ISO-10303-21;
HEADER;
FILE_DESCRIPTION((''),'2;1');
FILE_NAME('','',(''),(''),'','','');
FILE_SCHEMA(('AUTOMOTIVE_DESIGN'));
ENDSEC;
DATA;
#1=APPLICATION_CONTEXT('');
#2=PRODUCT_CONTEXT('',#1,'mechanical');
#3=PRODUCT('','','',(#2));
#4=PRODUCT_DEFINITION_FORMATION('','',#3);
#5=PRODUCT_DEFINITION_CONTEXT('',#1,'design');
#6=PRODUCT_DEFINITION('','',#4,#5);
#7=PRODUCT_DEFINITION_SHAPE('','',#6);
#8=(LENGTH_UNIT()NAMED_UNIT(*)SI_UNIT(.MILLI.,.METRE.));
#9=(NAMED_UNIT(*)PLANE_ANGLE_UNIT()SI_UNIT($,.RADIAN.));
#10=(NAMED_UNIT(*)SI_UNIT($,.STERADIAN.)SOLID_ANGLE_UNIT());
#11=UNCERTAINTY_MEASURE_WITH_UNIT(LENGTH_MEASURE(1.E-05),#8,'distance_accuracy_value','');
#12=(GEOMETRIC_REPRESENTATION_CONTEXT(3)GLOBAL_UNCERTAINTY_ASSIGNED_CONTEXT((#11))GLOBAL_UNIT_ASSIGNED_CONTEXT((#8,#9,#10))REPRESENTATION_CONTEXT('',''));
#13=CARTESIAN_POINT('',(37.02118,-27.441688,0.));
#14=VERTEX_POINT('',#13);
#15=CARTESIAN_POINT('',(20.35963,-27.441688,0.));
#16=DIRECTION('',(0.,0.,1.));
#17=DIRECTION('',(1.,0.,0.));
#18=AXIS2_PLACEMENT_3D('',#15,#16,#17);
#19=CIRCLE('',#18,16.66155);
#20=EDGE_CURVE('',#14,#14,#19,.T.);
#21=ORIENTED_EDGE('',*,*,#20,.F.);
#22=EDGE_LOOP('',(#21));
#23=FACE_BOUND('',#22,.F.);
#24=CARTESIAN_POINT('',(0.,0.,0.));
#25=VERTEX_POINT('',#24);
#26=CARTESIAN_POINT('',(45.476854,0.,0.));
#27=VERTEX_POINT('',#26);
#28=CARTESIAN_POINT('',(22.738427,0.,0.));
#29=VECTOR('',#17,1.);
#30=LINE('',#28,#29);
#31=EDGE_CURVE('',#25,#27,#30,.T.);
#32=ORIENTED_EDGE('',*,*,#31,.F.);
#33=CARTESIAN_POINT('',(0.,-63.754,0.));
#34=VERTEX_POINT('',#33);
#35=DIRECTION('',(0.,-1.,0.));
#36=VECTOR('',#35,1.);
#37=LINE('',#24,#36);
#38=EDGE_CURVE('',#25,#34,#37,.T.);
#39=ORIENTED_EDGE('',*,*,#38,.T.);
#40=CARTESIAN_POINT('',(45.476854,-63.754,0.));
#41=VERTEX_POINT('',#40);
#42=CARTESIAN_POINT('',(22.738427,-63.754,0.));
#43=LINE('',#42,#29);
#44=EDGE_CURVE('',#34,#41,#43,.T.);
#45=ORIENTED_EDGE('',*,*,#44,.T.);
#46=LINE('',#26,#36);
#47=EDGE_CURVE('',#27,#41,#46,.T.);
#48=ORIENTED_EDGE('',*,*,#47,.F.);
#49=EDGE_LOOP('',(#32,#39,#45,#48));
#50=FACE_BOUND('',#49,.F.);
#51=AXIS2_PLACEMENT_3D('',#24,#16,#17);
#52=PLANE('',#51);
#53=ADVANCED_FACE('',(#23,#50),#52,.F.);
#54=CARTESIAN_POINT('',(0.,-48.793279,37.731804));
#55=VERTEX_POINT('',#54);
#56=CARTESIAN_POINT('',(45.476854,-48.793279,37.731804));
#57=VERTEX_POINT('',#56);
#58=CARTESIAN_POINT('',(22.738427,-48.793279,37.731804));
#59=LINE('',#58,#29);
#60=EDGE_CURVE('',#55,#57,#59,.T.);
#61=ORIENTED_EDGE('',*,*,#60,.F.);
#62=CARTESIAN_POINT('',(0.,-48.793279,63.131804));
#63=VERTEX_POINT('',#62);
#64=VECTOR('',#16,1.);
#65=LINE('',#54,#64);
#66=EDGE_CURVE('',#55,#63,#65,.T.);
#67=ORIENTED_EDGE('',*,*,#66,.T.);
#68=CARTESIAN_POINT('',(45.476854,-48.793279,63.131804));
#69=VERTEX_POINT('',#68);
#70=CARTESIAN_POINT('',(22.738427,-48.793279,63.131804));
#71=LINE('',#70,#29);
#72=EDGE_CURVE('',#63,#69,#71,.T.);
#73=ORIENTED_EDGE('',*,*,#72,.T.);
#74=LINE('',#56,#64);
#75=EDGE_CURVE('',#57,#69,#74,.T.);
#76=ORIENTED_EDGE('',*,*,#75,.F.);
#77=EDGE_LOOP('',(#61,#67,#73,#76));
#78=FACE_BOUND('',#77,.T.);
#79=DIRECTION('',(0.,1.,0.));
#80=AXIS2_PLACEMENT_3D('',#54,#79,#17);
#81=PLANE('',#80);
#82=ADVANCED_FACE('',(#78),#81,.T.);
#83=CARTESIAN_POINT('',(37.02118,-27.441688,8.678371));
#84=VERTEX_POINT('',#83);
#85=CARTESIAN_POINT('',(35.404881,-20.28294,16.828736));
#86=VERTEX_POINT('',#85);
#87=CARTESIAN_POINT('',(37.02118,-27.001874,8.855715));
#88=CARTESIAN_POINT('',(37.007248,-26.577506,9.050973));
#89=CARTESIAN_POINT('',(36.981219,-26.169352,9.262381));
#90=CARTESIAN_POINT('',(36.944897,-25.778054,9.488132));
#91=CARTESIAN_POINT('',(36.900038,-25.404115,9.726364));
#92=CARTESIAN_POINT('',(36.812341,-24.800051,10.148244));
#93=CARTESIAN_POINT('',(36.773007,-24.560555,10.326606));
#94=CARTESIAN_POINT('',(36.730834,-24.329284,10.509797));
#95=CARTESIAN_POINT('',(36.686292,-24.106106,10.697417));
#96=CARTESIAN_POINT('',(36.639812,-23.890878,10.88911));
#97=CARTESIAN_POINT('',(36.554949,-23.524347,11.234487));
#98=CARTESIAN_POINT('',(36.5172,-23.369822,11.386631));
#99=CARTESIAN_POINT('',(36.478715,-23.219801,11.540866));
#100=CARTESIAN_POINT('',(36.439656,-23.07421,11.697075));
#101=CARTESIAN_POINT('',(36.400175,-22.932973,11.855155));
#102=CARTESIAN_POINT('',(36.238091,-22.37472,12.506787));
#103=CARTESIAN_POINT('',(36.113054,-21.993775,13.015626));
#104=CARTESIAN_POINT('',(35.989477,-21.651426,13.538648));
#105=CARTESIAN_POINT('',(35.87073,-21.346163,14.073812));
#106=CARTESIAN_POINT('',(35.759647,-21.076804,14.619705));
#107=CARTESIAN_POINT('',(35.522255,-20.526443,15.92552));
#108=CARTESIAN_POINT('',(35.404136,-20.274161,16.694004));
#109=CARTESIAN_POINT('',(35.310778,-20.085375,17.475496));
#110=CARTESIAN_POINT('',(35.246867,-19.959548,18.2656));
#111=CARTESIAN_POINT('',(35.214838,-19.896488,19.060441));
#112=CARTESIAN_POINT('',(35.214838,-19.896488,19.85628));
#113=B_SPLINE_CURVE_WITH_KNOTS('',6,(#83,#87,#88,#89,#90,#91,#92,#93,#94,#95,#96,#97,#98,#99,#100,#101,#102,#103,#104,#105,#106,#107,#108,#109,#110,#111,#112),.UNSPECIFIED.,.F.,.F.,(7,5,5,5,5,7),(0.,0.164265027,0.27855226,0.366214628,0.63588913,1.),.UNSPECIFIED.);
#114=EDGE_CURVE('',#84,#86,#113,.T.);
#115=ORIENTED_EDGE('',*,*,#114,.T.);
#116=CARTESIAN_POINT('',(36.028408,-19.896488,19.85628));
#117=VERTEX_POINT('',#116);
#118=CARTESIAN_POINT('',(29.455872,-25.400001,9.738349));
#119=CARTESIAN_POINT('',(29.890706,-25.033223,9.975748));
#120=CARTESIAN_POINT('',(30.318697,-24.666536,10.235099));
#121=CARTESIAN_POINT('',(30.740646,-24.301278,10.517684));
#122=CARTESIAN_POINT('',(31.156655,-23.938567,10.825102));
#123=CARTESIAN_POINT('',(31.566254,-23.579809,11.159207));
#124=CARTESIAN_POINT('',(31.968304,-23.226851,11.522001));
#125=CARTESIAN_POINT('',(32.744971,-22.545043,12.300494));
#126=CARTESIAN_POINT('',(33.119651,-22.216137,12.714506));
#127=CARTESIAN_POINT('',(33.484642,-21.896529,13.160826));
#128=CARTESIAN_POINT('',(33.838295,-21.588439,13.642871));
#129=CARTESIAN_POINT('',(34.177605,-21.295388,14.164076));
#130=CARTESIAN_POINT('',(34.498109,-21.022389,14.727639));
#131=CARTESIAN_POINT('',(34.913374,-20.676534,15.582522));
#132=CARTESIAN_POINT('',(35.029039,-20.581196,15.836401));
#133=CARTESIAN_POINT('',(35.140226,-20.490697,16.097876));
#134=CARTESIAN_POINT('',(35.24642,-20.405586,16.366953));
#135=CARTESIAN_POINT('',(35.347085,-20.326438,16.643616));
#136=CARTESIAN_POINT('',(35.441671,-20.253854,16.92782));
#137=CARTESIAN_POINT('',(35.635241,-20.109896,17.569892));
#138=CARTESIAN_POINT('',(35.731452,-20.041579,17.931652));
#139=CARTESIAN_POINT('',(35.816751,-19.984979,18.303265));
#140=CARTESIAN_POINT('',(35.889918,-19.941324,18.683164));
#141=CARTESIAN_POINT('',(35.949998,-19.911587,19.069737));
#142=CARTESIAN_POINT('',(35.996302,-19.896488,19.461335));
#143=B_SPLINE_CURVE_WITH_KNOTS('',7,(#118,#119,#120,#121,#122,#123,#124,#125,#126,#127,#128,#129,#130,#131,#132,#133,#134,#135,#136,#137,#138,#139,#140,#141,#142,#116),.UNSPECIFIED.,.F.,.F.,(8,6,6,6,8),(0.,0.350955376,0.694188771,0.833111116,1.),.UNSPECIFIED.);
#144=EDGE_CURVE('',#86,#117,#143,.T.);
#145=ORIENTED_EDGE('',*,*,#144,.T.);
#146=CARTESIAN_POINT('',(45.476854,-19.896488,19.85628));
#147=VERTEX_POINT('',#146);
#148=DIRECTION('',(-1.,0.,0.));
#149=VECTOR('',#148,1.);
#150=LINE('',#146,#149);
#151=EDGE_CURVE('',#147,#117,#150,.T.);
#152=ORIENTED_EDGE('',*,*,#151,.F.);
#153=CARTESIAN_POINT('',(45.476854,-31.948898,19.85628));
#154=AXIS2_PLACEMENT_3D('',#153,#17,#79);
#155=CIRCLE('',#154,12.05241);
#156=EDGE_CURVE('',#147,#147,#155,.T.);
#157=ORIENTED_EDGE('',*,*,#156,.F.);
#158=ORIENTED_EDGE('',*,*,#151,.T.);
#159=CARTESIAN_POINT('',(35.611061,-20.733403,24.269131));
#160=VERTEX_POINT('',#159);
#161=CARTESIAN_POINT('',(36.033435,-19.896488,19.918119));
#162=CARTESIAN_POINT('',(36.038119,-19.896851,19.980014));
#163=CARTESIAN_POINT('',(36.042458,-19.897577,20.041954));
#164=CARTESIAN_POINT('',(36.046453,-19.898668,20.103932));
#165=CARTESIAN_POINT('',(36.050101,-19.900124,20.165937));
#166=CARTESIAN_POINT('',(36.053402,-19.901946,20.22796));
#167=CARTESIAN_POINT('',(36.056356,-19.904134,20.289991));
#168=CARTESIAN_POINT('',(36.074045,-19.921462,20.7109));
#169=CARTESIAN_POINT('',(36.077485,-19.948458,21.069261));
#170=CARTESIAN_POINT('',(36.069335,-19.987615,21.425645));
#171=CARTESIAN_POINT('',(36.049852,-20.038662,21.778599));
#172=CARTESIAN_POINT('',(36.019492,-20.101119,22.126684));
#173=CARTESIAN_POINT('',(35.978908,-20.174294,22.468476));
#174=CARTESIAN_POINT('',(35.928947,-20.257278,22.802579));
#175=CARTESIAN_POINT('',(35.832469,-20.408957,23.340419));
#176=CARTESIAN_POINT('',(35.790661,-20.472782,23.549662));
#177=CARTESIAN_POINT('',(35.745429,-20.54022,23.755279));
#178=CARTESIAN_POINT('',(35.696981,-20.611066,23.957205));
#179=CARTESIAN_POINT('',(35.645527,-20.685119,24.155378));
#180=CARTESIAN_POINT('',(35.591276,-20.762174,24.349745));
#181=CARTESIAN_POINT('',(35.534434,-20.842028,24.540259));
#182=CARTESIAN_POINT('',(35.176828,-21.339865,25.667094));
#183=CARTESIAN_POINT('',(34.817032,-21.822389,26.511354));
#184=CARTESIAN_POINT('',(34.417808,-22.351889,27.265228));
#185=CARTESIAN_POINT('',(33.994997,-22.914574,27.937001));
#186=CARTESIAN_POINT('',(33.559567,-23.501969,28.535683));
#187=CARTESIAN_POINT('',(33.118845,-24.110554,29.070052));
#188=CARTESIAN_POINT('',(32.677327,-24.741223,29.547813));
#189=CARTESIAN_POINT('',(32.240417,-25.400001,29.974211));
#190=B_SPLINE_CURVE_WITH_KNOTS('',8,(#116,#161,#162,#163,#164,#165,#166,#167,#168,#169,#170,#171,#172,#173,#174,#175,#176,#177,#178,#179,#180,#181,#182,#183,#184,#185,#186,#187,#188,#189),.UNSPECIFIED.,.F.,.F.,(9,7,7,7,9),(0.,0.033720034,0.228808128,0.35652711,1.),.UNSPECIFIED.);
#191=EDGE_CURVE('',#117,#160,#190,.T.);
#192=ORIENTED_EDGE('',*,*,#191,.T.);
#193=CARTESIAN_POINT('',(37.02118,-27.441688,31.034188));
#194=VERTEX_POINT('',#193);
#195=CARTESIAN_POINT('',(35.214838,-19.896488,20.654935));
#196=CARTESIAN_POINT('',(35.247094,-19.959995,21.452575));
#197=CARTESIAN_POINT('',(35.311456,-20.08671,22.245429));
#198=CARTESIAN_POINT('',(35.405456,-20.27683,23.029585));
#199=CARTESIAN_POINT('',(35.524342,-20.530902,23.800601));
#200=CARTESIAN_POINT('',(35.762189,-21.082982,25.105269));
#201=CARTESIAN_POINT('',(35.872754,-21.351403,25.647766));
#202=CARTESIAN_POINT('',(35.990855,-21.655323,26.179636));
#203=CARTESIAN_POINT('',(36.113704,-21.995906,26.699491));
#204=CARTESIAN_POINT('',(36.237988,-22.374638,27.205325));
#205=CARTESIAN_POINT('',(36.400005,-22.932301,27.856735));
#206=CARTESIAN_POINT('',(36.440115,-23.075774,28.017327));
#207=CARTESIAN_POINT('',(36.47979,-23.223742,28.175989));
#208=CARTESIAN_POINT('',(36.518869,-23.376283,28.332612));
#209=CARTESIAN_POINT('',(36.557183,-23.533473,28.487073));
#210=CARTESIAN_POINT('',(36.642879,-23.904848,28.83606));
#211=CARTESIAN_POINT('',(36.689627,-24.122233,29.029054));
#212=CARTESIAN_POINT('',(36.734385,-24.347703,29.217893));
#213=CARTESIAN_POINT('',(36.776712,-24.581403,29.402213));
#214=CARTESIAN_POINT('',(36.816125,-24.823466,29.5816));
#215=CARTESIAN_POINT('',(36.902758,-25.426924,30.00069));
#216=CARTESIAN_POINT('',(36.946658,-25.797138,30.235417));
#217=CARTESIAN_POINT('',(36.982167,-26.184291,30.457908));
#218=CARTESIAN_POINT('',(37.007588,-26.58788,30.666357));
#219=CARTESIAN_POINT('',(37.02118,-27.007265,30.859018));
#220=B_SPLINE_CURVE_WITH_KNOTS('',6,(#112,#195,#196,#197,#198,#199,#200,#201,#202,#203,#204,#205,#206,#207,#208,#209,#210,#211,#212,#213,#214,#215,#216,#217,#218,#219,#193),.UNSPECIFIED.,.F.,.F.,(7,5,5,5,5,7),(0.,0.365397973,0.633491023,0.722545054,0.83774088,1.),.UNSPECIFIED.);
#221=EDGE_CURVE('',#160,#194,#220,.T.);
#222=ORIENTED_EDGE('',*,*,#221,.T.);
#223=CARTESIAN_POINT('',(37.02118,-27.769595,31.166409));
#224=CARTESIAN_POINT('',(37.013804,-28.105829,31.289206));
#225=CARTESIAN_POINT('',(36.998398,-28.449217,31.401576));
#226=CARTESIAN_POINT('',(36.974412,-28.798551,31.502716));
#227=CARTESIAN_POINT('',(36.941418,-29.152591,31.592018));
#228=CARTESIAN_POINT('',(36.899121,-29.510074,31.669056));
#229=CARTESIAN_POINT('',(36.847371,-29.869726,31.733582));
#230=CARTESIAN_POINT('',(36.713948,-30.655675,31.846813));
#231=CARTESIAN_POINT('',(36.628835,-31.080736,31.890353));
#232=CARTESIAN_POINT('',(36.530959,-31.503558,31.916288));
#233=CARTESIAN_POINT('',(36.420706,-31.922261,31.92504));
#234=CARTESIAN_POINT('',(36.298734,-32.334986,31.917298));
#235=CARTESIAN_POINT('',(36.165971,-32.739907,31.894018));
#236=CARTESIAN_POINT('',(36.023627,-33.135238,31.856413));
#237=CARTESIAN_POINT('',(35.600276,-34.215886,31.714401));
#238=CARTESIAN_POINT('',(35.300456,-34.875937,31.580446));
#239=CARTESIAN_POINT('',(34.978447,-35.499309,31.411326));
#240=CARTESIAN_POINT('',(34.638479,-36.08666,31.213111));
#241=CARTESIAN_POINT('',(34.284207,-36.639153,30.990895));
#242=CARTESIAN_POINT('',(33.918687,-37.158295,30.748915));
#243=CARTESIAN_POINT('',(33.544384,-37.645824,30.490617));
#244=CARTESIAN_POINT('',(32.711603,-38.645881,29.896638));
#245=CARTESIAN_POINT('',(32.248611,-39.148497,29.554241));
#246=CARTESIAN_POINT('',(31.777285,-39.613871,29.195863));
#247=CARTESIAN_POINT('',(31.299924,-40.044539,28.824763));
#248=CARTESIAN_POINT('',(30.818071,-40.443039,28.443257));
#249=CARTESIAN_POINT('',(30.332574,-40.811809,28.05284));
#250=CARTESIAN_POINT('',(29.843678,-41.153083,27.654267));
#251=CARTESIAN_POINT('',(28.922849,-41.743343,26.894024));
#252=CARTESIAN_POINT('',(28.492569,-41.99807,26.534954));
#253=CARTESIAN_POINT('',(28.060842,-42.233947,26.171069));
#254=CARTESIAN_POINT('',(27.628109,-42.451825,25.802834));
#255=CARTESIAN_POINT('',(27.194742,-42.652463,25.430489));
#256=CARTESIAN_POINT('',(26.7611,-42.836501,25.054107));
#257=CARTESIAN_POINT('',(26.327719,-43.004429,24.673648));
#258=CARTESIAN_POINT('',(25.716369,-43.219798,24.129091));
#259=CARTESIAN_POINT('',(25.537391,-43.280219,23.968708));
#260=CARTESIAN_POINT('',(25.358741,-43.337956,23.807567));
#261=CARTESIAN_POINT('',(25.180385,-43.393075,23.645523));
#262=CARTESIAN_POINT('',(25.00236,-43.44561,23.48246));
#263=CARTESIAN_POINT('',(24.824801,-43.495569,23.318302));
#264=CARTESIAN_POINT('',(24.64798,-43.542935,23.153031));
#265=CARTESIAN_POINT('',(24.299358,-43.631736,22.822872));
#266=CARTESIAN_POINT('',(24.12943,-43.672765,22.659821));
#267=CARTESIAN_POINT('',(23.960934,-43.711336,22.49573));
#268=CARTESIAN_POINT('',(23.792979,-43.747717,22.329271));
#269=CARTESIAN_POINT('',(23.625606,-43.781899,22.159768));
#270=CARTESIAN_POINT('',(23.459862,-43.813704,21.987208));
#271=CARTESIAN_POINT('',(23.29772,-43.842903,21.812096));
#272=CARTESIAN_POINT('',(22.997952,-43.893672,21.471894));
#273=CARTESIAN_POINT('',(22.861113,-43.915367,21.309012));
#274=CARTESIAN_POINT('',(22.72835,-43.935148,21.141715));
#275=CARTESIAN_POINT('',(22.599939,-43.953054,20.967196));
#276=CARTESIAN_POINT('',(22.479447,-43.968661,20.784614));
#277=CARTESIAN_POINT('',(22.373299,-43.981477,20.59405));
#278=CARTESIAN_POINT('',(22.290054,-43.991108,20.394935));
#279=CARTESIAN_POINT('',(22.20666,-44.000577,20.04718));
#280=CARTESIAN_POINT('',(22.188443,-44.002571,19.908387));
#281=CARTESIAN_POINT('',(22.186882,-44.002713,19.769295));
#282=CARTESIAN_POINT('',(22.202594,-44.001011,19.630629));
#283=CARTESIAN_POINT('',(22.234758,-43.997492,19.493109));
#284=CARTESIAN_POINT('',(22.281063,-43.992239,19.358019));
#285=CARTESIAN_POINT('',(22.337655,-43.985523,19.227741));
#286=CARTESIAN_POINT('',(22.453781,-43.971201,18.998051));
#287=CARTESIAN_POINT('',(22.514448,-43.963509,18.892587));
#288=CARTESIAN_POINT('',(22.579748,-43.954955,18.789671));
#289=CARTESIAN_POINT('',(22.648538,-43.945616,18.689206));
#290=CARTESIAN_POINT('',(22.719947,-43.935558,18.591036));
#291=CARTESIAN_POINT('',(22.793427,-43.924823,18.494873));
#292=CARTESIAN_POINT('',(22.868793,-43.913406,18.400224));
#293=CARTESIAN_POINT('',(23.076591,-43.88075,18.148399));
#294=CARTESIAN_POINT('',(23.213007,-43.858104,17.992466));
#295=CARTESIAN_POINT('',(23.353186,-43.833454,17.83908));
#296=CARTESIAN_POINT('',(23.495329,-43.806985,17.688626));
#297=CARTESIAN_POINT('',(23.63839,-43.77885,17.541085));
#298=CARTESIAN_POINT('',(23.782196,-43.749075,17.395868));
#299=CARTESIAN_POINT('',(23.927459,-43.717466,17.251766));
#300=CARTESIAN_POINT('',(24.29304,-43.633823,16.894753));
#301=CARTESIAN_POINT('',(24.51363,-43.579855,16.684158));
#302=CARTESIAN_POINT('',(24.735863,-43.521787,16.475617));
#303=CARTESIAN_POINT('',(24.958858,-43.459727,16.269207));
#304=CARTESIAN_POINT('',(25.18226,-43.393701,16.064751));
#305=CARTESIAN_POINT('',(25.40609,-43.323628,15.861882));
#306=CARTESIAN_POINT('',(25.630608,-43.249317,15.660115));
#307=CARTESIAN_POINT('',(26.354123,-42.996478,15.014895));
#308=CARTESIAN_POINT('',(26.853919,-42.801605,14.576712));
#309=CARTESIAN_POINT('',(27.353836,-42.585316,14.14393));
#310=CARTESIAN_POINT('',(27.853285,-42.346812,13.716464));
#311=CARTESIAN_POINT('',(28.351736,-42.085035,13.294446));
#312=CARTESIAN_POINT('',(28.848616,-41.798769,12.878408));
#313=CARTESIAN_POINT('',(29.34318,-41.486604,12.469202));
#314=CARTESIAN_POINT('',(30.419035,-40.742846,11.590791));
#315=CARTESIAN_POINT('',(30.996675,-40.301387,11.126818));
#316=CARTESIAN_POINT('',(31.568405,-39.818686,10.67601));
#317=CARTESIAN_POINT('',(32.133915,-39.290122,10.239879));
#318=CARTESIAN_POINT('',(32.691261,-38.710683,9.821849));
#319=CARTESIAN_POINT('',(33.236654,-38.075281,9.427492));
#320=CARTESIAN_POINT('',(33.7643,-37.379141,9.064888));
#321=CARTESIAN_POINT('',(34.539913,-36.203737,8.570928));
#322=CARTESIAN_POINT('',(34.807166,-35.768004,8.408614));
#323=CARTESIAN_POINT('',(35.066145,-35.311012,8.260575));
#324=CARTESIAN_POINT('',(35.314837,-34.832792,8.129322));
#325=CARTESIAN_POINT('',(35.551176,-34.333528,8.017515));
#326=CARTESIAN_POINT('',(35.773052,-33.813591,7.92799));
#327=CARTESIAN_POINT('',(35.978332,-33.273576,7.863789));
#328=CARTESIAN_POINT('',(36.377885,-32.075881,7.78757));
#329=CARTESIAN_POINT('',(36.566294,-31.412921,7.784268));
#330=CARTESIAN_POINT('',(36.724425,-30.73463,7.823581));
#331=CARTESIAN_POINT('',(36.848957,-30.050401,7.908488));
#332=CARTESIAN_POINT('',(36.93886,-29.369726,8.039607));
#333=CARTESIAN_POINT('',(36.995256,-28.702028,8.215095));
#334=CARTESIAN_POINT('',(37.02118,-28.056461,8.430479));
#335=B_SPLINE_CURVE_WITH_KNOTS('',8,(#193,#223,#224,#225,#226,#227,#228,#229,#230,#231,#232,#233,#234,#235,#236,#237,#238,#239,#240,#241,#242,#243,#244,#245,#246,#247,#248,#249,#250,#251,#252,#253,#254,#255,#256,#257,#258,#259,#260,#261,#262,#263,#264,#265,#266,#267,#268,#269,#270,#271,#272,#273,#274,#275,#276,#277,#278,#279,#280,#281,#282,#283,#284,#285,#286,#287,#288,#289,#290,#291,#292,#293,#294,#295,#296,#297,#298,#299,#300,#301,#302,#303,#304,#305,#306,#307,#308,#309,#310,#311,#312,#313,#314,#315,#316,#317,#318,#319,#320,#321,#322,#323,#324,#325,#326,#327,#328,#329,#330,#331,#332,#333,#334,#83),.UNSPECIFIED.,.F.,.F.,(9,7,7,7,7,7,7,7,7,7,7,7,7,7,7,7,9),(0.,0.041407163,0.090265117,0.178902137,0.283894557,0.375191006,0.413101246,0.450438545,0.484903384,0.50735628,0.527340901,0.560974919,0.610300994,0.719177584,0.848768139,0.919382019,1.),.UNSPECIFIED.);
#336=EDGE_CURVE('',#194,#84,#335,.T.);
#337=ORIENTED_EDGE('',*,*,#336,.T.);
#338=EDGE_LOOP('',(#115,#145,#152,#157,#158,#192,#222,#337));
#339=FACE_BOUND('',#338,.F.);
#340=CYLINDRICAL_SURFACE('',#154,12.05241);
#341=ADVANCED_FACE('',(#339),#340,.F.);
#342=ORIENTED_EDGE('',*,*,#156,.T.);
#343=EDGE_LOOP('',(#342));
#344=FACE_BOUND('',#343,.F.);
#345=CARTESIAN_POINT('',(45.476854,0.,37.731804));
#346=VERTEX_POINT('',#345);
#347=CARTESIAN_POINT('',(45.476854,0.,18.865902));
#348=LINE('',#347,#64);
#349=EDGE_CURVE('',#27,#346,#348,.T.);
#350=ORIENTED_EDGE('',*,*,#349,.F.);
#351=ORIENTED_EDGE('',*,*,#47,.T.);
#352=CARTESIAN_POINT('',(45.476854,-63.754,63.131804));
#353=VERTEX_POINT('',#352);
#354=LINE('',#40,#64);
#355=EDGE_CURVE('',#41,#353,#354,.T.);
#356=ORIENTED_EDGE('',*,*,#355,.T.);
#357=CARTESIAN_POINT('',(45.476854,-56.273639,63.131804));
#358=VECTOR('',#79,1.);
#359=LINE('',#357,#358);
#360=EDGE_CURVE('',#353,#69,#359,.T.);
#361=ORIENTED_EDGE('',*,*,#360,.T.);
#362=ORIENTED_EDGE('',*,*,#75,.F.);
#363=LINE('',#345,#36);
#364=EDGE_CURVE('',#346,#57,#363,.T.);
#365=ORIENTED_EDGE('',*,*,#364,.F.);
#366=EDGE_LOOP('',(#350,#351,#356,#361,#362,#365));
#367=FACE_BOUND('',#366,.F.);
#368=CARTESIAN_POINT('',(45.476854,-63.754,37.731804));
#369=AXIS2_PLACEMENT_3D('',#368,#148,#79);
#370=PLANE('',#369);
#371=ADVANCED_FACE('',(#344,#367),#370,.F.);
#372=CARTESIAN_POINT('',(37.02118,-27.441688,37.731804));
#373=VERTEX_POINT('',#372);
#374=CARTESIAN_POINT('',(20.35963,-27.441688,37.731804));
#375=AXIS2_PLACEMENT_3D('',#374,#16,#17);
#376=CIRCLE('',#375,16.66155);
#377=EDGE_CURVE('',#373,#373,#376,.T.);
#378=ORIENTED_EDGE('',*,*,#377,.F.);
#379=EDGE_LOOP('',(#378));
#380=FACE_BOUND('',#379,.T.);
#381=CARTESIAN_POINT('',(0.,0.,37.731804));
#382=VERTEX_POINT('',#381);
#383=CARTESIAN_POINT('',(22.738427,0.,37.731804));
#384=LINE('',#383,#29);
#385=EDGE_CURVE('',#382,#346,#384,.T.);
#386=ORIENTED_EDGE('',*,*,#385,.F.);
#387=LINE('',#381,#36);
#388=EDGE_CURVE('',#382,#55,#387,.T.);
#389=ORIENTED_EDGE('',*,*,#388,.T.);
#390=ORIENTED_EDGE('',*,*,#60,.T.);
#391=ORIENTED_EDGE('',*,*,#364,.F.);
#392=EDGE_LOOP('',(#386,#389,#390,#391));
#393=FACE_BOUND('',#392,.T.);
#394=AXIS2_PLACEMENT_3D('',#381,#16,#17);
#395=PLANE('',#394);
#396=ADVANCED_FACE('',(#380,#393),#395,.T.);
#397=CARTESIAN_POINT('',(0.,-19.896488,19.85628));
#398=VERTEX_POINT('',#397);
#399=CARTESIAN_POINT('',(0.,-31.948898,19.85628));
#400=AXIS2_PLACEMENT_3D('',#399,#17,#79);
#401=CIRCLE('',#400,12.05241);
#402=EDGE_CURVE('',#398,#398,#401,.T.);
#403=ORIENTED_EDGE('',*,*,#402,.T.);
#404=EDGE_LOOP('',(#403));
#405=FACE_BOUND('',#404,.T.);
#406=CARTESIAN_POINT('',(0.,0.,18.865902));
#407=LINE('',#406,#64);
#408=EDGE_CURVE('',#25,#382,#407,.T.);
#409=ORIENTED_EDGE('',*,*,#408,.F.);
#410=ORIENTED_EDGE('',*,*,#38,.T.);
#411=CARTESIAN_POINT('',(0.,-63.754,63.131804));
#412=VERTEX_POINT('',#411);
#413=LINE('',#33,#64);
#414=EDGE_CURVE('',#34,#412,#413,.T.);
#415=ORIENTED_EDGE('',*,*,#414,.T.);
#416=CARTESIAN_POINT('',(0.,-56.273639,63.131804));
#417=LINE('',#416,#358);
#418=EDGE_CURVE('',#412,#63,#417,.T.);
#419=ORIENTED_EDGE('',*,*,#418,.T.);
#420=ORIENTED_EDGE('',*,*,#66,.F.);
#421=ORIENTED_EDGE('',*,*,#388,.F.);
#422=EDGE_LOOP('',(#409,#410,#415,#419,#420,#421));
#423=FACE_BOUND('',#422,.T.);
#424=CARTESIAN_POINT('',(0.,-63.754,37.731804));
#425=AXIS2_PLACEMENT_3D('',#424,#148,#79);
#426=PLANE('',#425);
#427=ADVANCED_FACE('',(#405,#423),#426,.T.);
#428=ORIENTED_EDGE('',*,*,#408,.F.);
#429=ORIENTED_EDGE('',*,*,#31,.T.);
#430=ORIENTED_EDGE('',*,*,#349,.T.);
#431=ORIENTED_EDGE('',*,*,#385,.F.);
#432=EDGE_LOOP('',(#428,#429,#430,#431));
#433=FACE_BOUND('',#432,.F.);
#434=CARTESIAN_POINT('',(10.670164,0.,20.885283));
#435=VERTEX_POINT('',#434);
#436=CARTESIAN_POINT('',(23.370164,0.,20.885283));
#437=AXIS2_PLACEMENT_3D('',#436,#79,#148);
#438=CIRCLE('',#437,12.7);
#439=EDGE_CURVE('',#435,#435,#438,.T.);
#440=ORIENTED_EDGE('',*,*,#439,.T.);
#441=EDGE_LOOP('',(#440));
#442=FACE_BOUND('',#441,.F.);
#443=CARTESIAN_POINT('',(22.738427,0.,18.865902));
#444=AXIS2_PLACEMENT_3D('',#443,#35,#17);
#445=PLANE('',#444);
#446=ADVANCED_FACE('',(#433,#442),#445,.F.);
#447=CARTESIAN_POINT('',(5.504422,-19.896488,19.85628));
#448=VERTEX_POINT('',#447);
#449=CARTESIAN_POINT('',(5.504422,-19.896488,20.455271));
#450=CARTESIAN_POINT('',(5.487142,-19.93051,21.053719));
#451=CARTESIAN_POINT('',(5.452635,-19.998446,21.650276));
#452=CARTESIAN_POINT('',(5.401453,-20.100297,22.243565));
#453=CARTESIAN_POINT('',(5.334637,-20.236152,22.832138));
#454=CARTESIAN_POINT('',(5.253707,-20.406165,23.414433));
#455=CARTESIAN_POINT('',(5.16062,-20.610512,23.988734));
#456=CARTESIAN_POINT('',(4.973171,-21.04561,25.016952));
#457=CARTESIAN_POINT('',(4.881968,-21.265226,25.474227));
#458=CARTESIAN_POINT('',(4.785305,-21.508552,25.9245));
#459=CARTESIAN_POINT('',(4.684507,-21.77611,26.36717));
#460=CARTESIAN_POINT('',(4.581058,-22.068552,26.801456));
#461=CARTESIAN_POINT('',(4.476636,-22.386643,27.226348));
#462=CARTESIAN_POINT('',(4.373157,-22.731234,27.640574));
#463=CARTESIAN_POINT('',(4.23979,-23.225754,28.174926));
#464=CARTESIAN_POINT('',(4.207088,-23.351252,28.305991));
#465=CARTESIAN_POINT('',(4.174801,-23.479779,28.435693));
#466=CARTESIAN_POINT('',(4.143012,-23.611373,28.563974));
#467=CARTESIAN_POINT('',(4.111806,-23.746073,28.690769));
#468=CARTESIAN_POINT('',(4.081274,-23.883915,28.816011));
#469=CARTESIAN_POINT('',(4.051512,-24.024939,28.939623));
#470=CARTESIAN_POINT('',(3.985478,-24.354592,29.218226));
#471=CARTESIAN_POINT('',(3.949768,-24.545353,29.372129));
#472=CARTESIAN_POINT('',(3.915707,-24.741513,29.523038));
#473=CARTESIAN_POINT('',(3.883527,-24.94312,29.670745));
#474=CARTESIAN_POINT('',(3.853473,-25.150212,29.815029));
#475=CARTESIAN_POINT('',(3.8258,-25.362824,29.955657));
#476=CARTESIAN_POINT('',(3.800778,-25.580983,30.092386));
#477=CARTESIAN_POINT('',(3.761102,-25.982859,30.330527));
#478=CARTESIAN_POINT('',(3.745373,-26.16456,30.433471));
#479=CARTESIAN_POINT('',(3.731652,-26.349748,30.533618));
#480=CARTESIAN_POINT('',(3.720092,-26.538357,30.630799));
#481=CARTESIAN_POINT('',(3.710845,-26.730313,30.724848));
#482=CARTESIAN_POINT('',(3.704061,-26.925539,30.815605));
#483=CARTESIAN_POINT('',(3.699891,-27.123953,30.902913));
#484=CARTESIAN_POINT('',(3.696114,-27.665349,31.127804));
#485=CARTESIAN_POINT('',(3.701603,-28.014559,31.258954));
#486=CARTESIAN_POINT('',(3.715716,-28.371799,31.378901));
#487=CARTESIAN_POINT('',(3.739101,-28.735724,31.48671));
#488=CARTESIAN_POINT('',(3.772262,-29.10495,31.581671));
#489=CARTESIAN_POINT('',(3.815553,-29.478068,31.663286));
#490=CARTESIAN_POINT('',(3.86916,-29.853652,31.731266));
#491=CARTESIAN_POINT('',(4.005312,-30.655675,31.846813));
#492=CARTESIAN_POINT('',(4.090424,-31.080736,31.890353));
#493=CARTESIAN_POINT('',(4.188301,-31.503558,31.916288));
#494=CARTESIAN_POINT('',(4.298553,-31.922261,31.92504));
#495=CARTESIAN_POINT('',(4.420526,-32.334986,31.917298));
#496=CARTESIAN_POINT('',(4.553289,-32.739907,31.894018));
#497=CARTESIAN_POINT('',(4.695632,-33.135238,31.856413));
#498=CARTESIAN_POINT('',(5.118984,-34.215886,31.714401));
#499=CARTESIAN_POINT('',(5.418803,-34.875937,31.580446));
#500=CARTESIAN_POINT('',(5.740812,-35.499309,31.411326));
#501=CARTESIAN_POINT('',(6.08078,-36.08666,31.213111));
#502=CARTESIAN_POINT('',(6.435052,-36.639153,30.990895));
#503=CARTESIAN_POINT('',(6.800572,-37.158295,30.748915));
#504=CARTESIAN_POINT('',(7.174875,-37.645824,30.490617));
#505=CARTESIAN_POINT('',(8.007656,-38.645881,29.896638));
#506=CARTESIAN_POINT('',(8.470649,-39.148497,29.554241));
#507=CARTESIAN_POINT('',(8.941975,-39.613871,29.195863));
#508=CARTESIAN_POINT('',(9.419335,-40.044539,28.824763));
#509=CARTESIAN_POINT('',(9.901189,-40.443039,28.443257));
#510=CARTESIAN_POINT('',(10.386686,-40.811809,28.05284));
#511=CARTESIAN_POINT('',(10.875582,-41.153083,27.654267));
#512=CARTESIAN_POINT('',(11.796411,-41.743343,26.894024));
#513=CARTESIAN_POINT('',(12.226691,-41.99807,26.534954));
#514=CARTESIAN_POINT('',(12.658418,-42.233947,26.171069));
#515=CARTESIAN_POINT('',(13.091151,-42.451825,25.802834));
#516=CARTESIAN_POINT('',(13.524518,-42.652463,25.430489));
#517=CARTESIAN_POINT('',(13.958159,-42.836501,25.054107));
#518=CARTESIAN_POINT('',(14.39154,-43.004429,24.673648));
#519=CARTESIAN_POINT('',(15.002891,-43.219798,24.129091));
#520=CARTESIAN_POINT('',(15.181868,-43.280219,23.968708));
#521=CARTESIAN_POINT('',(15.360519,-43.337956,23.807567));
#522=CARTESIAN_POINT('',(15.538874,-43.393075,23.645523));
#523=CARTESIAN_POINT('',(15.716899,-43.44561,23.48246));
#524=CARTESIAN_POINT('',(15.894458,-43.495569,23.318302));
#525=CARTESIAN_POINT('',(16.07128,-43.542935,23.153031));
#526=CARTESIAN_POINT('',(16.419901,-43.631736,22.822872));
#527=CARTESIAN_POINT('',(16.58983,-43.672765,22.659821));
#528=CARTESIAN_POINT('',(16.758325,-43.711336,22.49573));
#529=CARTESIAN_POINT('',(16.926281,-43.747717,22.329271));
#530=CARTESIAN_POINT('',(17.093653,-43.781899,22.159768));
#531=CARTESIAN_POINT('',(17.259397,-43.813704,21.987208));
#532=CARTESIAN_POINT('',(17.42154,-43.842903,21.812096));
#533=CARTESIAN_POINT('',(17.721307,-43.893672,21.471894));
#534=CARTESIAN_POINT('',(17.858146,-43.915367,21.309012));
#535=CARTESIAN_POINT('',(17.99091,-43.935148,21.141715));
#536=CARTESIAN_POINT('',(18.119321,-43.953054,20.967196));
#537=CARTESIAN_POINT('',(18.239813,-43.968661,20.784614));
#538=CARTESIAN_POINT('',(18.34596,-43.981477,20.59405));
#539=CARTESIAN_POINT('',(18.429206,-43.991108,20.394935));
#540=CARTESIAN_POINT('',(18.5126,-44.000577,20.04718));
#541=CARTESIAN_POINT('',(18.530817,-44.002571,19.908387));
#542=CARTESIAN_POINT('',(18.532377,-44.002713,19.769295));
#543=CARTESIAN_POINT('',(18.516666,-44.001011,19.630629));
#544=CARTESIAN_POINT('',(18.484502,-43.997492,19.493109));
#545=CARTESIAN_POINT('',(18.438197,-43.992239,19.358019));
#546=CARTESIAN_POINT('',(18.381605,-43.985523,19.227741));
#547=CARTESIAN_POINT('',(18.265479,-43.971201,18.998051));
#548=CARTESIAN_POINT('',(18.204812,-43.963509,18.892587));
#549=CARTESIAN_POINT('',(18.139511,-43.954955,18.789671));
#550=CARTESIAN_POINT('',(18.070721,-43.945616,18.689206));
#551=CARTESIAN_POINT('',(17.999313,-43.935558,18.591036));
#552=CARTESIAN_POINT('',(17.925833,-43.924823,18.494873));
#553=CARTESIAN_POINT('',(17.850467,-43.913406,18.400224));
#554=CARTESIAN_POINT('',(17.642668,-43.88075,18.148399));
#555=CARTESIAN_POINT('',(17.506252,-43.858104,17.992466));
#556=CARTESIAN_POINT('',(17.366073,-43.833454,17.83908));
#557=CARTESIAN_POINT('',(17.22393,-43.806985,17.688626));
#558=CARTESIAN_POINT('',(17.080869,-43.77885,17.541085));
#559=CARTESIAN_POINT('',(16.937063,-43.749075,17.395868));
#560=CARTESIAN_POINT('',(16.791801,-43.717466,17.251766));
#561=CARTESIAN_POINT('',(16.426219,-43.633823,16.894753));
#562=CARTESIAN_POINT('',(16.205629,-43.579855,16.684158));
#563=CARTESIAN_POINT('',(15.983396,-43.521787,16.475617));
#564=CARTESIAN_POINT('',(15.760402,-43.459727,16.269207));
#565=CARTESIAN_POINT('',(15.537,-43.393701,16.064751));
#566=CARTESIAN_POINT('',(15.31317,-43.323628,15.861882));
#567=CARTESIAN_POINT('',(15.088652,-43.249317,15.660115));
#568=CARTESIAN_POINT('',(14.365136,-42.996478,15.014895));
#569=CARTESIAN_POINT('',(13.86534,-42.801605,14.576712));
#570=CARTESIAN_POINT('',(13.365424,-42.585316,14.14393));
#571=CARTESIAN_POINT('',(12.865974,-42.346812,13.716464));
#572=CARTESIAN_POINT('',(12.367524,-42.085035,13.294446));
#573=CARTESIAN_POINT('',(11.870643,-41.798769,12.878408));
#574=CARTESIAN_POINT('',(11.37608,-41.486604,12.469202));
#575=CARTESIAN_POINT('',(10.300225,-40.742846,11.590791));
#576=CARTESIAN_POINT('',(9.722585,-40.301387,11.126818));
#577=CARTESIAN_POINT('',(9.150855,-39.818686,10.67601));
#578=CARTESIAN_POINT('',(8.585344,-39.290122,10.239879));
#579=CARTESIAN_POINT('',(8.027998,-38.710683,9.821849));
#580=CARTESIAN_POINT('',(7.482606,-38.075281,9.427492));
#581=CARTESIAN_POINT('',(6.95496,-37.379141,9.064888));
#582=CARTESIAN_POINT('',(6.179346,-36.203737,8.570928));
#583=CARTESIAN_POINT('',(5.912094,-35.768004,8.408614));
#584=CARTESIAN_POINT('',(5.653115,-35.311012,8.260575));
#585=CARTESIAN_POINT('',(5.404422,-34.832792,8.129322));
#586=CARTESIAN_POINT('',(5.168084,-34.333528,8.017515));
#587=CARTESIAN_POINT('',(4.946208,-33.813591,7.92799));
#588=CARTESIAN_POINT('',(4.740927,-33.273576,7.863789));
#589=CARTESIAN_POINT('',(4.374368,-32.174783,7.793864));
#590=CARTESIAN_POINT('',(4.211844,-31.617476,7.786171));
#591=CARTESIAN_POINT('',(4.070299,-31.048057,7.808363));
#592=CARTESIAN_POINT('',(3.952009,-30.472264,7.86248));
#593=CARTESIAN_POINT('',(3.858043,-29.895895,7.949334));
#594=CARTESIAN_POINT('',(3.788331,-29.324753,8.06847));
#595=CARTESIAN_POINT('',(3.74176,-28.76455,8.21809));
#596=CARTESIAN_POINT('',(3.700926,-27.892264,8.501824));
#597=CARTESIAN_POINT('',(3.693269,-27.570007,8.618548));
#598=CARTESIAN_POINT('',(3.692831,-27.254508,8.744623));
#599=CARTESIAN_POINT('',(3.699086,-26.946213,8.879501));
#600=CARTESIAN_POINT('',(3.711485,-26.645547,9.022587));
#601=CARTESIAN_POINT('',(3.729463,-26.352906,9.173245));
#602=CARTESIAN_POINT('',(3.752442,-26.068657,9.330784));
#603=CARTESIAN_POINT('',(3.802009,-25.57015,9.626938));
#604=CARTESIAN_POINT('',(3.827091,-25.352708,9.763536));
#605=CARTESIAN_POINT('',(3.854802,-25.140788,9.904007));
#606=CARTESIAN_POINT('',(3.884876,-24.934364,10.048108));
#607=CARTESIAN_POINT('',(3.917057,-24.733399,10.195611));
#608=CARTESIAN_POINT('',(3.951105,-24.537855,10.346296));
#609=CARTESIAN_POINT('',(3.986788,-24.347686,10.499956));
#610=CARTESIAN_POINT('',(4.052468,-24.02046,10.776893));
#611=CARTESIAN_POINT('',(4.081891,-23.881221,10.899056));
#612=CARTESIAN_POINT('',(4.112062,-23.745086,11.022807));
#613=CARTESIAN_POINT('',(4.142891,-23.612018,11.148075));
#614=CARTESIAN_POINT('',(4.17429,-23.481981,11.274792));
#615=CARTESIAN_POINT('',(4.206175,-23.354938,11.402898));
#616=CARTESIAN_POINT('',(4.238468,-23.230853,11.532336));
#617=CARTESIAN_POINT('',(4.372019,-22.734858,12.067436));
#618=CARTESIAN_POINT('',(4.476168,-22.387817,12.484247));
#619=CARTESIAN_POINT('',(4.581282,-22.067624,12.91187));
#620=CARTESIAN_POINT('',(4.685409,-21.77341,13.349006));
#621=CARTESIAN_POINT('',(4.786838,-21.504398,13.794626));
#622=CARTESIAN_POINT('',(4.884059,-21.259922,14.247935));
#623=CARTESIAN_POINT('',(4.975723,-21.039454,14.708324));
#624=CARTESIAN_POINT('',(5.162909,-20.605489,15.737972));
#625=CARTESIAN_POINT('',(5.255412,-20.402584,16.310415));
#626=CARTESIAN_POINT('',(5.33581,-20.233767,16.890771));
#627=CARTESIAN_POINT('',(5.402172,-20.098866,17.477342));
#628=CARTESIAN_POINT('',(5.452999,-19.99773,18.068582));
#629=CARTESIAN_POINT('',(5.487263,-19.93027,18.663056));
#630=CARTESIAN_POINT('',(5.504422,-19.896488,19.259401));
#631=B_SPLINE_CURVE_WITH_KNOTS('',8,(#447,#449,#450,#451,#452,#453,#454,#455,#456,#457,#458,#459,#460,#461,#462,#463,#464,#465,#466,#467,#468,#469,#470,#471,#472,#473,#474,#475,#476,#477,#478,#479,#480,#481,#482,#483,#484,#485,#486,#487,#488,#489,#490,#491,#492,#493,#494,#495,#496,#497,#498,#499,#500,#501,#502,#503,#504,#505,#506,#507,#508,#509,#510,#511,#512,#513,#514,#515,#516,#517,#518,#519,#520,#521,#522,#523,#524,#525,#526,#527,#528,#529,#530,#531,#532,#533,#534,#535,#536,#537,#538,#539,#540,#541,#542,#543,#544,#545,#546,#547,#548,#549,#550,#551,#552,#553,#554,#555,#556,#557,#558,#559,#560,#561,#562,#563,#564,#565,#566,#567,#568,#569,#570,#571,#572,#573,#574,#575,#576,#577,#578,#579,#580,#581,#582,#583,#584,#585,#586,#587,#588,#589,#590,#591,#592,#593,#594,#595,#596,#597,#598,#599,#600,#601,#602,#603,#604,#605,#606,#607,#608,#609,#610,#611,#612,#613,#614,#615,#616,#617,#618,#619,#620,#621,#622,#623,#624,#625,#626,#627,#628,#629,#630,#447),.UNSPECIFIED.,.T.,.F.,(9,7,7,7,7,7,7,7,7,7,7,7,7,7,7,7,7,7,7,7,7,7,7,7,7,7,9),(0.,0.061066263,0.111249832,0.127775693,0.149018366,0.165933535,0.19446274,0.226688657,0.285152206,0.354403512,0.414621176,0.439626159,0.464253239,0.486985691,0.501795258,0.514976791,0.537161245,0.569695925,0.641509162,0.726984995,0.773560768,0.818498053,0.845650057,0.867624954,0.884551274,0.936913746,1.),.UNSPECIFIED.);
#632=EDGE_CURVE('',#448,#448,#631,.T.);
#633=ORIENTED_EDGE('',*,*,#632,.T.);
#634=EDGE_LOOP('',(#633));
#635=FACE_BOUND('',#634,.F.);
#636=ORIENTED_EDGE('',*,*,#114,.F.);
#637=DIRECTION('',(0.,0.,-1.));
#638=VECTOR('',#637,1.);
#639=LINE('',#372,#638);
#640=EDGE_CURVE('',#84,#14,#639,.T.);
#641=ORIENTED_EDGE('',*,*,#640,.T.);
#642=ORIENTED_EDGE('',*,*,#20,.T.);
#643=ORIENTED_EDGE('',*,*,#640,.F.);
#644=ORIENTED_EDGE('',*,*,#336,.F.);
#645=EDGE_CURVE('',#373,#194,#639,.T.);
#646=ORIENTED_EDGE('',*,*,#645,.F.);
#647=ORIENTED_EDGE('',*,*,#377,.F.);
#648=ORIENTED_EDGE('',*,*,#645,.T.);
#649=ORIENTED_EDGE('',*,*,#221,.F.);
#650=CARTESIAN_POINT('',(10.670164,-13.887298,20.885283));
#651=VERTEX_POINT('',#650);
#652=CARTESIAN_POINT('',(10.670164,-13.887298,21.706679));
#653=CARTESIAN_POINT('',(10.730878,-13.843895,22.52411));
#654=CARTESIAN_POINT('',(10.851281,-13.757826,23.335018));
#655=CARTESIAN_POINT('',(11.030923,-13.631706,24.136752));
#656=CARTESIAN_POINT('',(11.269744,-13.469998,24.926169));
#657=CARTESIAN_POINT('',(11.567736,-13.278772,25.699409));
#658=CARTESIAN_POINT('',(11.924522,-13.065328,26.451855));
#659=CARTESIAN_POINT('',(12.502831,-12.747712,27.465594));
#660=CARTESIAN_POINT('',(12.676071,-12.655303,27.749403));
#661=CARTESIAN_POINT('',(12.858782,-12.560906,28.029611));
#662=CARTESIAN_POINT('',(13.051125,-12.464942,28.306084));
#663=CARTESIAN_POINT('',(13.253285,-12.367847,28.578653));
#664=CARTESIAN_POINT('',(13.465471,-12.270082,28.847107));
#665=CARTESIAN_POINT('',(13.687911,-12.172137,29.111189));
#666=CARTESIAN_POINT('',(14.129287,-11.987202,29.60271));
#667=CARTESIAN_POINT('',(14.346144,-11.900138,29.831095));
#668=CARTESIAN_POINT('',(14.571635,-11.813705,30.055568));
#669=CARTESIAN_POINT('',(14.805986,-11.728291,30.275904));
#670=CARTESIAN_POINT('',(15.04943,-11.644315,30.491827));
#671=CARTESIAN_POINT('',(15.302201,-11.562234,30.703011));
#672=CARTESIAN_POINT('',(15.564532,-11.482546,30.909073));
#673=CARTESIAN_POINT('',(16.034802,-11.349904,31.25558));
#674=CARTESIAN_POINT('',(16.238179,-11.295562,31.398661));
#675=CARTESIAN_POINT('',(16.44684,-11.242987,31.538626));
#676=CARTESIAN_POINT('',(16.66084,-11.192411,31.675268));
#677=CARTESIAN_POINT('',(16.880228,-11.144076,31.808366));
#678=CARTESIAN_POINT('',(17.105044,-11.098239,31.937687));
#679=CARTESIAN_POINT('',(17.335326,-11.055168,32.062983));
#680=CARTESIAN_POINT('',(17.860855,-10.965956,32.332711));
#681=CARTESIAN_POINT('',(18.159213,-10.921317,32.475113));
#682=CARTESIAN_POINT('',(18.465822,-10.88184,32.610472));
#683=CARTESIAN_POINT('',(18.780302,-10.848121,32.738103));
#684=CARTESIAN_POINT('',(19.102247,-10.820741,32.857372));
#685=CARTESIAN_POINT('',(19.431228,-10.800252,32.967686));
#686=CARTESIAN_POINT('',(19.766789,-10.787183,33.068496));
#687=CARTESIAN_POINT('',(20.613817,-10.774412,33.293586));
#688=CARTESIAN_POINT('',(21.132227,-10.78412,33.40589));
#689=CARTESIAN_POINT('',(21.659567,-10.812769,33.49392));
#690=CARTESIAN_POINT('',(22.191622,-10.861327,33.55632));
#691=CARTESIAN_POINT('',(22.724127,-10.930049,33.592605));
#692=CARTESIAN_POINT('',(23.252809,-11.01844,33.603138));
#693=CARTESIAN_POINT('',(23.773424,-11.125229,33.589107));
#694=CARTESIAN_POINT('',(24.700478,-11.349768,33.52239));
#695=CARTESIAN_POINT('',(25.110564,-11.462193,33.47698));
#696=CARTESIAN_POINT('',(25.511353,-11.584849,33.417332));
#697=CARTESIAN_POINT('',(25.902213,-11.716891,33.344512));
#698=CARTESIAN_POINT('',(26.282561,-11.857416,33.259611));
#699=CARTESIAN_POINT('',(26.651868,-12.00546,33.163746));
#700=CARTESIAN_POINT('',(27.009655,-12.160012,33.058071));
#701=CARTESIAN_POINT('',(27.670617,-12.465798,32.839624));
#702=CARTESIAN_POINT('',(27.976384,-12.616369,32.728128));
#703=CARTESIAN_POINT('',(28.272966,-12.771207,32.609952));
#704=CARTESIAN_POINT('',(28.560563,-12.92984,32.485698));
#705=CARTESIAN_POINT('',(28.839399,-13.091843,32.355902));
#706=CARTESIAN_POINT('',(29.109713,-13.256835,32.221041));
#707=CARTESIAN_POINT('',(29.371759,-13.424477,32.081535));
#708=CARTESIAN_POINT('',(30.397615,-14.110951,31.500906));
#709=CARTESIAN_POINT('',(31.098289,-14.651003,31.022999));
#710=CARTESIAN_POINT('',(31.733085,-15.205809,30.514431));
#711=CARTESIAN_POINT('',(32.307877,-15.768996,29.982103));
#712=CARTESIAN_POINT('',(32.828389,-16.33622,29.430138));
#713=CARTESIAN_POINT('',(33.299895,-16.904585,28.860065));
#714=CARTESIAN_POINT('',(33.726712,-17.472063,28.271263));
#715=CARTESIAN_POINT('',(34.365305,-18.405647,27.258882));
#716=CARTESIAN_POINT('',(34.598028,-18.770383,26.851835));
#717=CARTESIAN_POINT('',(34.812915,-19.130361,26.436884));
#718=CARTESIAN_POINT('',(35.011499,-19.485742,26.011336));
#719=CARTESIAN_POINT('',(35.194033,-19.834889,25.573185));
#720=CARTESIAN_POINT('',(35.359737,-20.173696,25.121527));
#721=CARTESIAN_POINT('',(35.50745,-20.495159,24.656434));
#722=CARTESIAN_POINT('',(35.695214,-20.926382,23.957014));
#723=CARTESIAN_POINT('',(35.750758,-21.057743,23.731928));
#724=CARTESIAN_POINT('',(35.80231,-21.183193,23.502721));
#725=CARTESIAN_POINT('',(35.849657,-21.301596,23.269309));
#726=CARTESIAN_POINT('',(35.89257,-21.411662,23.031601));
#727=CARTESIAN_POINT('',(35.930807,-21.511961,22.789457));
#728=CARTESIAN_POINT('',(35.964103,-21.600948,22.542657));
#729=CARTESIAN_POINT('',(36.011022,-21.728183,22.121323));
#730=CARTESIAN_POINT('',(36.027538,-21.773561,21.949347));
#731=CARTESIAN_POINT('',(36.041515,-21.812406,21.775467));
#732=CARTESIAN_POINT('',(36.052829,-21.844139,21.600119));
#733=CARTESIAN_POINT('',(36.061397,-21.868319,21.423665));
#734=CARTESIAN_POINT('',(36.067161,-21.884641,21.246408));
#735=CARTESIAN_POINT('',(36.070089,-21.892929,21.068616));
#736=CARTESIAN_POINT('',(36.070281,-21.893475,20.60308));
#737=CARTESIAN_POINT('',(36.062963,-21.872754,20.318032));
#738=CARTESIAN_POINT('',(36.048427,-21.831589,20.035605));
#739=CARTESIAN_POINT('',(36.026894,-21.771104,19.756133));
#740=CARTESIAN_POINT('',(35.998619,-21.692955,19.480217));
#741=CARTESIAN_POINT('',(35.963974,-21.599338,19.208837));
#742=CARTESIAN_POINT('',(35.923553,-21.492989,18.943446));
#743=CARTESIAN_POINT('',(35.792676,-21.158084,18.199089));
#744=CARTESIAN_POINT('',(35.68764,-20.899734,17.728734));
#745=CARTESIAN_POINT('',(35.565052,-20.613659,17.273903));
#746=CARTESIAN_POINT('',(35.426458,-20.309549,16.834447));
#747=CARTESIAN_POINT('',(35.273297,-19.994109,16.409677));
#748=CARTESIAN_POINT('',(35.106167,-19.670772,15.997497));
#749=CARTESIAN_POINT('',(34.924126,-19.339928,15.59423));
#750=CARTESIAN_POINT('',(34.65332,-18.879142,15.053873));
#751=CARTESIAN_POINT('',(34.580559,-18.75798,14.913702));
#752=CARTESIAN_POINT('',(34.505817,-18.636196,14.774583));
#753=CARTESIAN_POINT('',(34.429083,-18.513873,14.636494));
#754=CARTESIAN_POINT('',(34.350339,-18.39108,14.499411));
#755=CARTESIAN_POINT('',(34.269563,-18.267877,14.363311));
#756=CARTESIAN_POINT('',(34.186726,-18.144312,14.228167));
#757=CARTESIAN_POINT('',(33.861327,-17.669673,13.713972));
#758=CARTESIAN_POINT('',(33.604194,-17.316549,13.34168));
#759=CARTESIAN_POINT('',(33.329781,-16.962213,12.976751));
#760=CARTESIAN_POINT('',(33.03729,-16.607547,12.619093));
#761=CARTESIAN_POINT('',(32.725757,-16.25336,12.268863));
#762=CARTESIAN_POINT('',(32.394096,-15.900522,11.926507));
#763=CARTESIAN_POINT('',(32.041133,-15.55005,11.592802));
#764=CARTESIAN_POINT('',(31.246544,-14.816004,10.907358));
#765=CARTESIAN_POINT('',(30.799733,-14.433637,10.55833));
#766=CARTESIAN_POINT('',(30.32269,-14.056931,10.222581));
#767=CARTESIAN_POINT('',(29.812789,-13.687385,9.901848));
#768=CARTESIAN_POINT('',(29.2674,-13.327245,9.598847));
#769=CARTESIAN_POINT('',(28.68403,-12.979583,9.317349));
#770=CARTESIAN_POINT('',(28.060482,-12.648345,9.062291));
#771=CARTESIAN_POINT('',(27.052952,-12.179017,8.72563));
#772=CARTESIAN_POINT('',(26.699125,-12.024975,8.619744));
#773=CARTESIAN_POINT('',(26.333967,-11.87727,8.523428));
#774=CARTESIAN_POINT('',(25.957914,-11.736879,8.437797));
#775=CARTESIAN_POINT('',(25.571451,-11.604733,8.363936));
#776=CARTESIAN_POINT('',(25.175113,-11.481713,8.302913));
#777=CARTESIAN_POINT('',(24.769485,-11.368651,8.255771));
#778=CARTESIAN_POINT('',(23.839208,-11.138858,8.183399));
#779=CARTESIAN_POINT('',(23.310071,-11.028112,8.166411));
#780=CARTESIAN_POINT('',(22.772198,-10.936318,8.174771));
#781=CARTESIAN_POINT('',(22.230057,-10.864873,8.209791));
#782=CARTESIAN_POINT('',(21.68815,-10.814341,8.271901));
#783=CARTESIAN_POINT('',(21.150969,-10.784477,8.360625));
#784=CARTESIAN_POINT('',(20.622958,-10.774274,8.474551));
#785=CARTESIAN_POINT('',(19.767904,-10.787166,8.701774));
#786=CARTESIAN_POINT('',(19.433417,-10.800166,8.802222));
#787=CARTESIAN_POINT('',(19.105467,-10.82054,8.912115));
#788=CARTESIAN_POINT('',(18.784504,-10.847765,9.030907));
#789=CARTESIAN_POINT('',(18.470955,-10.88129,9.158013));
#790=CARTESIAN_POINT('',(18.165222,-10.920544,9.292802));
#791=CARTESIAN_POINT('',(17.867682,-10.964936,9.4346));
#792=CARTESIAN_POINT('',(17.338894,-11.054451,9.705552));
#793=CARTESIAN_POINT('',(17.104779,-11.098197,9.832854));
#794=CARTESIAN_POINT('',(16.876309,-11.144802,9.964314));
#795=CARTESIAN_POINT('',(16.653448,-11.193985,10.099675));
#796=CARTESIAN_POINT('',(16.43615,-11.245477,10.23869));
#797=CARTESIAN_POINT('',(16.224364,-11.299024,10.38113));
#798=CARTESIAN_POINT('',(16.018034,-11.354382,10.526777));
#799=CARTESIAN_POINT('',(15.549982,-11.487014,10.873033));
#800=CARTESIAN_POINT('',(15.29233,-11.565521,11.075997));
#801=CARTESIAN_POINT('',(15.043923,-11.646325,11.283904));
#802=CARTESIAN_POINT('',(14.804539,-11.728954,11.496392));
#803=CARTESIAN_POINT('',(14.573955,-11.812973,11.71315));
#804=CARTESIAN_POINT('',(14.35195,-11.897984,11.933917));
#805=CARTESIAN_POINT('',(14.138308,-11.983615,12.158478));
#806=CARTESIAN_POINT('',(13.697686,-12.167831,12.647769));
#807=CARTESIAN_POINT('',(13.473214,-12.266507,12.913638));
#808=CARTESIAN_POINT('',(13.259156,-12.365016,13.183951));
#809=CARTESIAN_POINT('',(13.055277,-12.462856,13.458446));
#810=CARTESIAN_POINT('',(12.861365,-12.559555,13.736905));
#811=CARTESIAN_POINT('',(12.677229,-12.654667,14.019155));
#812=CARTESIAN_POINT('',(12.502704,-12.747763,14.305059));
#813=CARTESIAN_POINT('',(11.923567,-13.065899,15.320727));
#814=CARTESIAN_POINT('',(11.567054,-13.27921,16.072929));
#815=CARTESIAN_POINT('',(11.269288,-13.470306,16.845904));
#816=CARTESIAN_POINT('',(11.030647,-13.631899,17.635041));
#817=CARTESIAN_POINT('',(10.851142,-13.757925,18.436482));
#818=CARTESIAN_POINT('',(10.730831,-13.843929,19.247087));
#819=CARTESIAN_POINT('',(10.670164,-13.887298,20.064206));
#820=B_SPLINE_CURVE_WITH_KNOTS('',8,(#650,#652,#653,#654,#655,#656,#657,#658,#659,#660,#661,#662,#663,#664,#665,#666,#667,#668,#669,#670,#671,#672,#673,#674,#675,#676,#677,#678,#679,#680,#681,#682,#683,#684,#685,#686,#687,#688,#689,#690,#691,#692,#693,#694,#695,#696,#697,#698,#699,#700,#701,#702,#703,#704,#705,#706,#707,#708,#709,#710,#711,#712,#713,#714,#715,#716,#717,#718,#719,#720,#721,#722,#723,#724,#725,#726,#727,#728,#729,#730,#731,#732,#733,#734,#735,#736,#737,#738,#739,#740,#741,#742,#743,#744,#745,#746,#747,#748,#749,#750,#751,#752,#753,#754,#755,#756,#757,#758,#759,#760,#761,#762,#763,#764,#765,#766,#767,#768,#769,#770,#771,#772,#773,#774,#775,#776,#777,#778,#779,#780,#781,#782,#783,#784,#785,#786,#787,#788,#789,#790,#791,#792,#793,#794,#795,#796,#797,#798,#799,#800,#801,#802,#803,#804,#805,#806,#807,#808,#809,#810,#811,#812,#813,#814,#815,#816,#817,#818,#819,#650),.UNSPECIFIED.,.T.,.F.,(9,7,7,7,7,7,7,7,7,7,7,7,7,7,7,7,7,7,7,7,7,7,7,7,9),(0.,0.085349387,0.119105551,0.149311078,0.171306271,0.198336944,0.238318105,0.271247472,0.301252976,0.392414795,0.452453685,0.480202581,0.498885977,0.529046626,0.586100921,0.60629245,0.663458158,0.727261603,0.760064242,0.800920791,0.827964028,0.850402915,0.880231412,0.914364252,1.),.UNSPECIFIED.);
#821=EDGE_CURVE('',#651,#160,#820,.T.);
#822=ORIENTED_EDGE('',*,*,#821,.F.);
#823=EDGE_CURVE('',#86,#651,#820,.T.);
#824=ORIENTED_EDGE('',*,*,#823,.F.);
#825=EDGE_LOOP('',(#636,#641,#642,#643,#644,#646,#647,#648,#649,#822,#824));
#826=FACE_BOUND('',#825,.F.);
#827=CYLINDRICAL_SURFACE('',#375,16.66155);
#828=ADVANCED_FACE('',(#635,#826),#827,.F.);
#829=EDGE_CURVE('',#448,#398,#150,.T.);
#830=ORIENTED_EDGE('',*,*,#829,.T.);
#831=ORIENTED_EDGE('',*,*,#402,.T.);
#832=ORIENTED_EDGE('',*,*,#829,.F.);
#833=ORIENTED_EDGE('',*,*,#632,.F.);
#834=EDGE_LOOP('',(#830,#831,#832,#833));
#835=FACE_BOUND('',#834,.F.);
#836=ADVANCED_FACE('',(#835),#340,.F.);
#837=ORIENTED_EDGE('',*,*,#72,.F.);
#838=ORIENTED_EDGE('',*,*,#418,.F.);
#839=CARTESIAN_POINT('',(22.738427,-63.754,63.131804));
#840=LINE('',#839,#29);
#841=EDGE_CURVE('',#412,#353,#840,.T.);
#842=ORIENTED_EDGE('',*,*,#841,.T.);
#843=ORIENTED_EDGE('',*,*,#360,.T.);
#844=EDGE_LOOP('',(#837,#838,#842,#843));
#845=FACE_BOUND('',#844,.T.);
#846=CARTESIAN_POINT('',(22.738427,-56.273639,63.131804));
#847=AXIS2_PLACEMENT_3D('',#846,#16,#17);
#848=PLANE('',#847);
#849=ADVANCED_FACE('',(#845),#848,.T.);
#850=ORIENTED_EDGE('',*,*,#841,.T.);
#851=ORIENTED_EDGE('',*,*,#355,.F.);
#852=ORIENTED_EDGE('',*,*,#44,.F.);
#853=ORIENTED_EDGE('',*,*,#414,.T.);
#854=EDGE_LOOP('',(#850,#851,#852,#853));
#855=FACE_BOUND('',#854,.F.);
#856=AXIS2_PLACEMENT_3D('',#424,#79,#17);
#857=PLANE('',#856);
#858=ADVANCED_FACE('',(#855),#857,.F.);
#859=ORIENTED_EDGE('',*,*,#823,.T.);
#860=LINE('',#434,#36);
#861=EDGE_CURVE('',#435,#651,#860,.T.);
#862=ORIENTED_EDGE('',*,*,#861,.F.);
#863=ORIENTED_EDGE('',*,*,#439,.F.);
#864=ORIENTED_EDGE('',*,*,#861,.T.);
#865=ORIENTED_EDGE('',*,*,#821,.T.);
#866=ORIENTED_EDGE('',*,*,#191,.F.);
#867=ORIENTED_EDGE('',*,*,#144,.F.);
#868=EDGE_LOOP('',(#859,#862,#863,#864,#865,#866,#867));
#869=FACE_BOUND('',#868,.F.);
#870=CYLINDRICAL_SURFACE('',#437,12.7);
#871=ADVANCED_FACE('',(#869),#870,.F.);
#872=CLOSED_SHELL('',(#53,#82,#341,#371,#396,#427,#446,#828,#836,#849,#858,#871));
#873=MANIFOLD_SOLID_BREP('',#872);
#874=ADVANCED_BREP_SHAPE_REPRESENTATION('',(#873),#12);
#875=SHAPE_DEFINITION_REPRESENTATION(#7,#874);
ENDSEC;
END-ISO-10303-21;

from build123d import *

# Parameters (mm, degrees)
F0_W      = 45.4768538475
F0_H      = 37.7318039536
F1_DEPTH  = 63.754
F2_R      = 16.6615499076
F3_DEPTH  = 75.184
F4_W      = 45.4768538475
F4_H      = 14.9607213655
F5_DEPTH  = 25.4
F8_R      = 12.0524100186
F10_DEPTH = 59.436
F11_R     = 12.7
F12_DEPTH = 25.4


# Not quite as in the source:
# - the program builds the solid bodies; features that only make, move or delete a surface that nothing else refers to are left out


with BuildPart() as f1:
    # F0 (on Front) → F1 (new body)
    with BuildSketch(Plane.XZ):
        with Locations((22.7384269238, 18.8659019768)):
            Rectangle(F0_W, F0_H)
    extrude(amount=F1_DEPTH)

    # F2 (on face) → F3 (cut)
    with BuildSketch(Plane.XY.offset(37.7318039536)):
        with Locations((20.3596297652, -27.4416878819)):
            Circle(F2_R)
    extrude(amount=-F3_DEPTH, mode=Mode.SUBTRACT)

    # F4 (on face) → F5 (join)
    with BuildSketch(Plane.XY.offset(37.7318039536)):
        with Locations((22.7384269238, -56.2736393173)):
            Rectangle(F4_W, F4_H)
    extrude(amount=F5_DEPTH)

    # F8 (on face) → F10 (cut)
    with BuildSketch(Plane.YZ.offset(45.4768538475)):
        with Locations((-31.9488979876, 19.8562797159)):
            Circle(F8_R)
    extrude(amount=-F10_DEPTH, mode=Mode.SUBTRACT)

    # F11 (on face) → F12 (cut)
    with BuildSketch(Plane(origin=(0, 0, 0), x_dir=(-1, 0, 0), z_dir=(0, 1, 0))):
        with Locations((-23.3701635152, 20.8852831274)):
            Circle(F11_R)
    extrude(amount=-F12_DEPTH, mode=Mode.SUBTRACT)


solid = f1.part
